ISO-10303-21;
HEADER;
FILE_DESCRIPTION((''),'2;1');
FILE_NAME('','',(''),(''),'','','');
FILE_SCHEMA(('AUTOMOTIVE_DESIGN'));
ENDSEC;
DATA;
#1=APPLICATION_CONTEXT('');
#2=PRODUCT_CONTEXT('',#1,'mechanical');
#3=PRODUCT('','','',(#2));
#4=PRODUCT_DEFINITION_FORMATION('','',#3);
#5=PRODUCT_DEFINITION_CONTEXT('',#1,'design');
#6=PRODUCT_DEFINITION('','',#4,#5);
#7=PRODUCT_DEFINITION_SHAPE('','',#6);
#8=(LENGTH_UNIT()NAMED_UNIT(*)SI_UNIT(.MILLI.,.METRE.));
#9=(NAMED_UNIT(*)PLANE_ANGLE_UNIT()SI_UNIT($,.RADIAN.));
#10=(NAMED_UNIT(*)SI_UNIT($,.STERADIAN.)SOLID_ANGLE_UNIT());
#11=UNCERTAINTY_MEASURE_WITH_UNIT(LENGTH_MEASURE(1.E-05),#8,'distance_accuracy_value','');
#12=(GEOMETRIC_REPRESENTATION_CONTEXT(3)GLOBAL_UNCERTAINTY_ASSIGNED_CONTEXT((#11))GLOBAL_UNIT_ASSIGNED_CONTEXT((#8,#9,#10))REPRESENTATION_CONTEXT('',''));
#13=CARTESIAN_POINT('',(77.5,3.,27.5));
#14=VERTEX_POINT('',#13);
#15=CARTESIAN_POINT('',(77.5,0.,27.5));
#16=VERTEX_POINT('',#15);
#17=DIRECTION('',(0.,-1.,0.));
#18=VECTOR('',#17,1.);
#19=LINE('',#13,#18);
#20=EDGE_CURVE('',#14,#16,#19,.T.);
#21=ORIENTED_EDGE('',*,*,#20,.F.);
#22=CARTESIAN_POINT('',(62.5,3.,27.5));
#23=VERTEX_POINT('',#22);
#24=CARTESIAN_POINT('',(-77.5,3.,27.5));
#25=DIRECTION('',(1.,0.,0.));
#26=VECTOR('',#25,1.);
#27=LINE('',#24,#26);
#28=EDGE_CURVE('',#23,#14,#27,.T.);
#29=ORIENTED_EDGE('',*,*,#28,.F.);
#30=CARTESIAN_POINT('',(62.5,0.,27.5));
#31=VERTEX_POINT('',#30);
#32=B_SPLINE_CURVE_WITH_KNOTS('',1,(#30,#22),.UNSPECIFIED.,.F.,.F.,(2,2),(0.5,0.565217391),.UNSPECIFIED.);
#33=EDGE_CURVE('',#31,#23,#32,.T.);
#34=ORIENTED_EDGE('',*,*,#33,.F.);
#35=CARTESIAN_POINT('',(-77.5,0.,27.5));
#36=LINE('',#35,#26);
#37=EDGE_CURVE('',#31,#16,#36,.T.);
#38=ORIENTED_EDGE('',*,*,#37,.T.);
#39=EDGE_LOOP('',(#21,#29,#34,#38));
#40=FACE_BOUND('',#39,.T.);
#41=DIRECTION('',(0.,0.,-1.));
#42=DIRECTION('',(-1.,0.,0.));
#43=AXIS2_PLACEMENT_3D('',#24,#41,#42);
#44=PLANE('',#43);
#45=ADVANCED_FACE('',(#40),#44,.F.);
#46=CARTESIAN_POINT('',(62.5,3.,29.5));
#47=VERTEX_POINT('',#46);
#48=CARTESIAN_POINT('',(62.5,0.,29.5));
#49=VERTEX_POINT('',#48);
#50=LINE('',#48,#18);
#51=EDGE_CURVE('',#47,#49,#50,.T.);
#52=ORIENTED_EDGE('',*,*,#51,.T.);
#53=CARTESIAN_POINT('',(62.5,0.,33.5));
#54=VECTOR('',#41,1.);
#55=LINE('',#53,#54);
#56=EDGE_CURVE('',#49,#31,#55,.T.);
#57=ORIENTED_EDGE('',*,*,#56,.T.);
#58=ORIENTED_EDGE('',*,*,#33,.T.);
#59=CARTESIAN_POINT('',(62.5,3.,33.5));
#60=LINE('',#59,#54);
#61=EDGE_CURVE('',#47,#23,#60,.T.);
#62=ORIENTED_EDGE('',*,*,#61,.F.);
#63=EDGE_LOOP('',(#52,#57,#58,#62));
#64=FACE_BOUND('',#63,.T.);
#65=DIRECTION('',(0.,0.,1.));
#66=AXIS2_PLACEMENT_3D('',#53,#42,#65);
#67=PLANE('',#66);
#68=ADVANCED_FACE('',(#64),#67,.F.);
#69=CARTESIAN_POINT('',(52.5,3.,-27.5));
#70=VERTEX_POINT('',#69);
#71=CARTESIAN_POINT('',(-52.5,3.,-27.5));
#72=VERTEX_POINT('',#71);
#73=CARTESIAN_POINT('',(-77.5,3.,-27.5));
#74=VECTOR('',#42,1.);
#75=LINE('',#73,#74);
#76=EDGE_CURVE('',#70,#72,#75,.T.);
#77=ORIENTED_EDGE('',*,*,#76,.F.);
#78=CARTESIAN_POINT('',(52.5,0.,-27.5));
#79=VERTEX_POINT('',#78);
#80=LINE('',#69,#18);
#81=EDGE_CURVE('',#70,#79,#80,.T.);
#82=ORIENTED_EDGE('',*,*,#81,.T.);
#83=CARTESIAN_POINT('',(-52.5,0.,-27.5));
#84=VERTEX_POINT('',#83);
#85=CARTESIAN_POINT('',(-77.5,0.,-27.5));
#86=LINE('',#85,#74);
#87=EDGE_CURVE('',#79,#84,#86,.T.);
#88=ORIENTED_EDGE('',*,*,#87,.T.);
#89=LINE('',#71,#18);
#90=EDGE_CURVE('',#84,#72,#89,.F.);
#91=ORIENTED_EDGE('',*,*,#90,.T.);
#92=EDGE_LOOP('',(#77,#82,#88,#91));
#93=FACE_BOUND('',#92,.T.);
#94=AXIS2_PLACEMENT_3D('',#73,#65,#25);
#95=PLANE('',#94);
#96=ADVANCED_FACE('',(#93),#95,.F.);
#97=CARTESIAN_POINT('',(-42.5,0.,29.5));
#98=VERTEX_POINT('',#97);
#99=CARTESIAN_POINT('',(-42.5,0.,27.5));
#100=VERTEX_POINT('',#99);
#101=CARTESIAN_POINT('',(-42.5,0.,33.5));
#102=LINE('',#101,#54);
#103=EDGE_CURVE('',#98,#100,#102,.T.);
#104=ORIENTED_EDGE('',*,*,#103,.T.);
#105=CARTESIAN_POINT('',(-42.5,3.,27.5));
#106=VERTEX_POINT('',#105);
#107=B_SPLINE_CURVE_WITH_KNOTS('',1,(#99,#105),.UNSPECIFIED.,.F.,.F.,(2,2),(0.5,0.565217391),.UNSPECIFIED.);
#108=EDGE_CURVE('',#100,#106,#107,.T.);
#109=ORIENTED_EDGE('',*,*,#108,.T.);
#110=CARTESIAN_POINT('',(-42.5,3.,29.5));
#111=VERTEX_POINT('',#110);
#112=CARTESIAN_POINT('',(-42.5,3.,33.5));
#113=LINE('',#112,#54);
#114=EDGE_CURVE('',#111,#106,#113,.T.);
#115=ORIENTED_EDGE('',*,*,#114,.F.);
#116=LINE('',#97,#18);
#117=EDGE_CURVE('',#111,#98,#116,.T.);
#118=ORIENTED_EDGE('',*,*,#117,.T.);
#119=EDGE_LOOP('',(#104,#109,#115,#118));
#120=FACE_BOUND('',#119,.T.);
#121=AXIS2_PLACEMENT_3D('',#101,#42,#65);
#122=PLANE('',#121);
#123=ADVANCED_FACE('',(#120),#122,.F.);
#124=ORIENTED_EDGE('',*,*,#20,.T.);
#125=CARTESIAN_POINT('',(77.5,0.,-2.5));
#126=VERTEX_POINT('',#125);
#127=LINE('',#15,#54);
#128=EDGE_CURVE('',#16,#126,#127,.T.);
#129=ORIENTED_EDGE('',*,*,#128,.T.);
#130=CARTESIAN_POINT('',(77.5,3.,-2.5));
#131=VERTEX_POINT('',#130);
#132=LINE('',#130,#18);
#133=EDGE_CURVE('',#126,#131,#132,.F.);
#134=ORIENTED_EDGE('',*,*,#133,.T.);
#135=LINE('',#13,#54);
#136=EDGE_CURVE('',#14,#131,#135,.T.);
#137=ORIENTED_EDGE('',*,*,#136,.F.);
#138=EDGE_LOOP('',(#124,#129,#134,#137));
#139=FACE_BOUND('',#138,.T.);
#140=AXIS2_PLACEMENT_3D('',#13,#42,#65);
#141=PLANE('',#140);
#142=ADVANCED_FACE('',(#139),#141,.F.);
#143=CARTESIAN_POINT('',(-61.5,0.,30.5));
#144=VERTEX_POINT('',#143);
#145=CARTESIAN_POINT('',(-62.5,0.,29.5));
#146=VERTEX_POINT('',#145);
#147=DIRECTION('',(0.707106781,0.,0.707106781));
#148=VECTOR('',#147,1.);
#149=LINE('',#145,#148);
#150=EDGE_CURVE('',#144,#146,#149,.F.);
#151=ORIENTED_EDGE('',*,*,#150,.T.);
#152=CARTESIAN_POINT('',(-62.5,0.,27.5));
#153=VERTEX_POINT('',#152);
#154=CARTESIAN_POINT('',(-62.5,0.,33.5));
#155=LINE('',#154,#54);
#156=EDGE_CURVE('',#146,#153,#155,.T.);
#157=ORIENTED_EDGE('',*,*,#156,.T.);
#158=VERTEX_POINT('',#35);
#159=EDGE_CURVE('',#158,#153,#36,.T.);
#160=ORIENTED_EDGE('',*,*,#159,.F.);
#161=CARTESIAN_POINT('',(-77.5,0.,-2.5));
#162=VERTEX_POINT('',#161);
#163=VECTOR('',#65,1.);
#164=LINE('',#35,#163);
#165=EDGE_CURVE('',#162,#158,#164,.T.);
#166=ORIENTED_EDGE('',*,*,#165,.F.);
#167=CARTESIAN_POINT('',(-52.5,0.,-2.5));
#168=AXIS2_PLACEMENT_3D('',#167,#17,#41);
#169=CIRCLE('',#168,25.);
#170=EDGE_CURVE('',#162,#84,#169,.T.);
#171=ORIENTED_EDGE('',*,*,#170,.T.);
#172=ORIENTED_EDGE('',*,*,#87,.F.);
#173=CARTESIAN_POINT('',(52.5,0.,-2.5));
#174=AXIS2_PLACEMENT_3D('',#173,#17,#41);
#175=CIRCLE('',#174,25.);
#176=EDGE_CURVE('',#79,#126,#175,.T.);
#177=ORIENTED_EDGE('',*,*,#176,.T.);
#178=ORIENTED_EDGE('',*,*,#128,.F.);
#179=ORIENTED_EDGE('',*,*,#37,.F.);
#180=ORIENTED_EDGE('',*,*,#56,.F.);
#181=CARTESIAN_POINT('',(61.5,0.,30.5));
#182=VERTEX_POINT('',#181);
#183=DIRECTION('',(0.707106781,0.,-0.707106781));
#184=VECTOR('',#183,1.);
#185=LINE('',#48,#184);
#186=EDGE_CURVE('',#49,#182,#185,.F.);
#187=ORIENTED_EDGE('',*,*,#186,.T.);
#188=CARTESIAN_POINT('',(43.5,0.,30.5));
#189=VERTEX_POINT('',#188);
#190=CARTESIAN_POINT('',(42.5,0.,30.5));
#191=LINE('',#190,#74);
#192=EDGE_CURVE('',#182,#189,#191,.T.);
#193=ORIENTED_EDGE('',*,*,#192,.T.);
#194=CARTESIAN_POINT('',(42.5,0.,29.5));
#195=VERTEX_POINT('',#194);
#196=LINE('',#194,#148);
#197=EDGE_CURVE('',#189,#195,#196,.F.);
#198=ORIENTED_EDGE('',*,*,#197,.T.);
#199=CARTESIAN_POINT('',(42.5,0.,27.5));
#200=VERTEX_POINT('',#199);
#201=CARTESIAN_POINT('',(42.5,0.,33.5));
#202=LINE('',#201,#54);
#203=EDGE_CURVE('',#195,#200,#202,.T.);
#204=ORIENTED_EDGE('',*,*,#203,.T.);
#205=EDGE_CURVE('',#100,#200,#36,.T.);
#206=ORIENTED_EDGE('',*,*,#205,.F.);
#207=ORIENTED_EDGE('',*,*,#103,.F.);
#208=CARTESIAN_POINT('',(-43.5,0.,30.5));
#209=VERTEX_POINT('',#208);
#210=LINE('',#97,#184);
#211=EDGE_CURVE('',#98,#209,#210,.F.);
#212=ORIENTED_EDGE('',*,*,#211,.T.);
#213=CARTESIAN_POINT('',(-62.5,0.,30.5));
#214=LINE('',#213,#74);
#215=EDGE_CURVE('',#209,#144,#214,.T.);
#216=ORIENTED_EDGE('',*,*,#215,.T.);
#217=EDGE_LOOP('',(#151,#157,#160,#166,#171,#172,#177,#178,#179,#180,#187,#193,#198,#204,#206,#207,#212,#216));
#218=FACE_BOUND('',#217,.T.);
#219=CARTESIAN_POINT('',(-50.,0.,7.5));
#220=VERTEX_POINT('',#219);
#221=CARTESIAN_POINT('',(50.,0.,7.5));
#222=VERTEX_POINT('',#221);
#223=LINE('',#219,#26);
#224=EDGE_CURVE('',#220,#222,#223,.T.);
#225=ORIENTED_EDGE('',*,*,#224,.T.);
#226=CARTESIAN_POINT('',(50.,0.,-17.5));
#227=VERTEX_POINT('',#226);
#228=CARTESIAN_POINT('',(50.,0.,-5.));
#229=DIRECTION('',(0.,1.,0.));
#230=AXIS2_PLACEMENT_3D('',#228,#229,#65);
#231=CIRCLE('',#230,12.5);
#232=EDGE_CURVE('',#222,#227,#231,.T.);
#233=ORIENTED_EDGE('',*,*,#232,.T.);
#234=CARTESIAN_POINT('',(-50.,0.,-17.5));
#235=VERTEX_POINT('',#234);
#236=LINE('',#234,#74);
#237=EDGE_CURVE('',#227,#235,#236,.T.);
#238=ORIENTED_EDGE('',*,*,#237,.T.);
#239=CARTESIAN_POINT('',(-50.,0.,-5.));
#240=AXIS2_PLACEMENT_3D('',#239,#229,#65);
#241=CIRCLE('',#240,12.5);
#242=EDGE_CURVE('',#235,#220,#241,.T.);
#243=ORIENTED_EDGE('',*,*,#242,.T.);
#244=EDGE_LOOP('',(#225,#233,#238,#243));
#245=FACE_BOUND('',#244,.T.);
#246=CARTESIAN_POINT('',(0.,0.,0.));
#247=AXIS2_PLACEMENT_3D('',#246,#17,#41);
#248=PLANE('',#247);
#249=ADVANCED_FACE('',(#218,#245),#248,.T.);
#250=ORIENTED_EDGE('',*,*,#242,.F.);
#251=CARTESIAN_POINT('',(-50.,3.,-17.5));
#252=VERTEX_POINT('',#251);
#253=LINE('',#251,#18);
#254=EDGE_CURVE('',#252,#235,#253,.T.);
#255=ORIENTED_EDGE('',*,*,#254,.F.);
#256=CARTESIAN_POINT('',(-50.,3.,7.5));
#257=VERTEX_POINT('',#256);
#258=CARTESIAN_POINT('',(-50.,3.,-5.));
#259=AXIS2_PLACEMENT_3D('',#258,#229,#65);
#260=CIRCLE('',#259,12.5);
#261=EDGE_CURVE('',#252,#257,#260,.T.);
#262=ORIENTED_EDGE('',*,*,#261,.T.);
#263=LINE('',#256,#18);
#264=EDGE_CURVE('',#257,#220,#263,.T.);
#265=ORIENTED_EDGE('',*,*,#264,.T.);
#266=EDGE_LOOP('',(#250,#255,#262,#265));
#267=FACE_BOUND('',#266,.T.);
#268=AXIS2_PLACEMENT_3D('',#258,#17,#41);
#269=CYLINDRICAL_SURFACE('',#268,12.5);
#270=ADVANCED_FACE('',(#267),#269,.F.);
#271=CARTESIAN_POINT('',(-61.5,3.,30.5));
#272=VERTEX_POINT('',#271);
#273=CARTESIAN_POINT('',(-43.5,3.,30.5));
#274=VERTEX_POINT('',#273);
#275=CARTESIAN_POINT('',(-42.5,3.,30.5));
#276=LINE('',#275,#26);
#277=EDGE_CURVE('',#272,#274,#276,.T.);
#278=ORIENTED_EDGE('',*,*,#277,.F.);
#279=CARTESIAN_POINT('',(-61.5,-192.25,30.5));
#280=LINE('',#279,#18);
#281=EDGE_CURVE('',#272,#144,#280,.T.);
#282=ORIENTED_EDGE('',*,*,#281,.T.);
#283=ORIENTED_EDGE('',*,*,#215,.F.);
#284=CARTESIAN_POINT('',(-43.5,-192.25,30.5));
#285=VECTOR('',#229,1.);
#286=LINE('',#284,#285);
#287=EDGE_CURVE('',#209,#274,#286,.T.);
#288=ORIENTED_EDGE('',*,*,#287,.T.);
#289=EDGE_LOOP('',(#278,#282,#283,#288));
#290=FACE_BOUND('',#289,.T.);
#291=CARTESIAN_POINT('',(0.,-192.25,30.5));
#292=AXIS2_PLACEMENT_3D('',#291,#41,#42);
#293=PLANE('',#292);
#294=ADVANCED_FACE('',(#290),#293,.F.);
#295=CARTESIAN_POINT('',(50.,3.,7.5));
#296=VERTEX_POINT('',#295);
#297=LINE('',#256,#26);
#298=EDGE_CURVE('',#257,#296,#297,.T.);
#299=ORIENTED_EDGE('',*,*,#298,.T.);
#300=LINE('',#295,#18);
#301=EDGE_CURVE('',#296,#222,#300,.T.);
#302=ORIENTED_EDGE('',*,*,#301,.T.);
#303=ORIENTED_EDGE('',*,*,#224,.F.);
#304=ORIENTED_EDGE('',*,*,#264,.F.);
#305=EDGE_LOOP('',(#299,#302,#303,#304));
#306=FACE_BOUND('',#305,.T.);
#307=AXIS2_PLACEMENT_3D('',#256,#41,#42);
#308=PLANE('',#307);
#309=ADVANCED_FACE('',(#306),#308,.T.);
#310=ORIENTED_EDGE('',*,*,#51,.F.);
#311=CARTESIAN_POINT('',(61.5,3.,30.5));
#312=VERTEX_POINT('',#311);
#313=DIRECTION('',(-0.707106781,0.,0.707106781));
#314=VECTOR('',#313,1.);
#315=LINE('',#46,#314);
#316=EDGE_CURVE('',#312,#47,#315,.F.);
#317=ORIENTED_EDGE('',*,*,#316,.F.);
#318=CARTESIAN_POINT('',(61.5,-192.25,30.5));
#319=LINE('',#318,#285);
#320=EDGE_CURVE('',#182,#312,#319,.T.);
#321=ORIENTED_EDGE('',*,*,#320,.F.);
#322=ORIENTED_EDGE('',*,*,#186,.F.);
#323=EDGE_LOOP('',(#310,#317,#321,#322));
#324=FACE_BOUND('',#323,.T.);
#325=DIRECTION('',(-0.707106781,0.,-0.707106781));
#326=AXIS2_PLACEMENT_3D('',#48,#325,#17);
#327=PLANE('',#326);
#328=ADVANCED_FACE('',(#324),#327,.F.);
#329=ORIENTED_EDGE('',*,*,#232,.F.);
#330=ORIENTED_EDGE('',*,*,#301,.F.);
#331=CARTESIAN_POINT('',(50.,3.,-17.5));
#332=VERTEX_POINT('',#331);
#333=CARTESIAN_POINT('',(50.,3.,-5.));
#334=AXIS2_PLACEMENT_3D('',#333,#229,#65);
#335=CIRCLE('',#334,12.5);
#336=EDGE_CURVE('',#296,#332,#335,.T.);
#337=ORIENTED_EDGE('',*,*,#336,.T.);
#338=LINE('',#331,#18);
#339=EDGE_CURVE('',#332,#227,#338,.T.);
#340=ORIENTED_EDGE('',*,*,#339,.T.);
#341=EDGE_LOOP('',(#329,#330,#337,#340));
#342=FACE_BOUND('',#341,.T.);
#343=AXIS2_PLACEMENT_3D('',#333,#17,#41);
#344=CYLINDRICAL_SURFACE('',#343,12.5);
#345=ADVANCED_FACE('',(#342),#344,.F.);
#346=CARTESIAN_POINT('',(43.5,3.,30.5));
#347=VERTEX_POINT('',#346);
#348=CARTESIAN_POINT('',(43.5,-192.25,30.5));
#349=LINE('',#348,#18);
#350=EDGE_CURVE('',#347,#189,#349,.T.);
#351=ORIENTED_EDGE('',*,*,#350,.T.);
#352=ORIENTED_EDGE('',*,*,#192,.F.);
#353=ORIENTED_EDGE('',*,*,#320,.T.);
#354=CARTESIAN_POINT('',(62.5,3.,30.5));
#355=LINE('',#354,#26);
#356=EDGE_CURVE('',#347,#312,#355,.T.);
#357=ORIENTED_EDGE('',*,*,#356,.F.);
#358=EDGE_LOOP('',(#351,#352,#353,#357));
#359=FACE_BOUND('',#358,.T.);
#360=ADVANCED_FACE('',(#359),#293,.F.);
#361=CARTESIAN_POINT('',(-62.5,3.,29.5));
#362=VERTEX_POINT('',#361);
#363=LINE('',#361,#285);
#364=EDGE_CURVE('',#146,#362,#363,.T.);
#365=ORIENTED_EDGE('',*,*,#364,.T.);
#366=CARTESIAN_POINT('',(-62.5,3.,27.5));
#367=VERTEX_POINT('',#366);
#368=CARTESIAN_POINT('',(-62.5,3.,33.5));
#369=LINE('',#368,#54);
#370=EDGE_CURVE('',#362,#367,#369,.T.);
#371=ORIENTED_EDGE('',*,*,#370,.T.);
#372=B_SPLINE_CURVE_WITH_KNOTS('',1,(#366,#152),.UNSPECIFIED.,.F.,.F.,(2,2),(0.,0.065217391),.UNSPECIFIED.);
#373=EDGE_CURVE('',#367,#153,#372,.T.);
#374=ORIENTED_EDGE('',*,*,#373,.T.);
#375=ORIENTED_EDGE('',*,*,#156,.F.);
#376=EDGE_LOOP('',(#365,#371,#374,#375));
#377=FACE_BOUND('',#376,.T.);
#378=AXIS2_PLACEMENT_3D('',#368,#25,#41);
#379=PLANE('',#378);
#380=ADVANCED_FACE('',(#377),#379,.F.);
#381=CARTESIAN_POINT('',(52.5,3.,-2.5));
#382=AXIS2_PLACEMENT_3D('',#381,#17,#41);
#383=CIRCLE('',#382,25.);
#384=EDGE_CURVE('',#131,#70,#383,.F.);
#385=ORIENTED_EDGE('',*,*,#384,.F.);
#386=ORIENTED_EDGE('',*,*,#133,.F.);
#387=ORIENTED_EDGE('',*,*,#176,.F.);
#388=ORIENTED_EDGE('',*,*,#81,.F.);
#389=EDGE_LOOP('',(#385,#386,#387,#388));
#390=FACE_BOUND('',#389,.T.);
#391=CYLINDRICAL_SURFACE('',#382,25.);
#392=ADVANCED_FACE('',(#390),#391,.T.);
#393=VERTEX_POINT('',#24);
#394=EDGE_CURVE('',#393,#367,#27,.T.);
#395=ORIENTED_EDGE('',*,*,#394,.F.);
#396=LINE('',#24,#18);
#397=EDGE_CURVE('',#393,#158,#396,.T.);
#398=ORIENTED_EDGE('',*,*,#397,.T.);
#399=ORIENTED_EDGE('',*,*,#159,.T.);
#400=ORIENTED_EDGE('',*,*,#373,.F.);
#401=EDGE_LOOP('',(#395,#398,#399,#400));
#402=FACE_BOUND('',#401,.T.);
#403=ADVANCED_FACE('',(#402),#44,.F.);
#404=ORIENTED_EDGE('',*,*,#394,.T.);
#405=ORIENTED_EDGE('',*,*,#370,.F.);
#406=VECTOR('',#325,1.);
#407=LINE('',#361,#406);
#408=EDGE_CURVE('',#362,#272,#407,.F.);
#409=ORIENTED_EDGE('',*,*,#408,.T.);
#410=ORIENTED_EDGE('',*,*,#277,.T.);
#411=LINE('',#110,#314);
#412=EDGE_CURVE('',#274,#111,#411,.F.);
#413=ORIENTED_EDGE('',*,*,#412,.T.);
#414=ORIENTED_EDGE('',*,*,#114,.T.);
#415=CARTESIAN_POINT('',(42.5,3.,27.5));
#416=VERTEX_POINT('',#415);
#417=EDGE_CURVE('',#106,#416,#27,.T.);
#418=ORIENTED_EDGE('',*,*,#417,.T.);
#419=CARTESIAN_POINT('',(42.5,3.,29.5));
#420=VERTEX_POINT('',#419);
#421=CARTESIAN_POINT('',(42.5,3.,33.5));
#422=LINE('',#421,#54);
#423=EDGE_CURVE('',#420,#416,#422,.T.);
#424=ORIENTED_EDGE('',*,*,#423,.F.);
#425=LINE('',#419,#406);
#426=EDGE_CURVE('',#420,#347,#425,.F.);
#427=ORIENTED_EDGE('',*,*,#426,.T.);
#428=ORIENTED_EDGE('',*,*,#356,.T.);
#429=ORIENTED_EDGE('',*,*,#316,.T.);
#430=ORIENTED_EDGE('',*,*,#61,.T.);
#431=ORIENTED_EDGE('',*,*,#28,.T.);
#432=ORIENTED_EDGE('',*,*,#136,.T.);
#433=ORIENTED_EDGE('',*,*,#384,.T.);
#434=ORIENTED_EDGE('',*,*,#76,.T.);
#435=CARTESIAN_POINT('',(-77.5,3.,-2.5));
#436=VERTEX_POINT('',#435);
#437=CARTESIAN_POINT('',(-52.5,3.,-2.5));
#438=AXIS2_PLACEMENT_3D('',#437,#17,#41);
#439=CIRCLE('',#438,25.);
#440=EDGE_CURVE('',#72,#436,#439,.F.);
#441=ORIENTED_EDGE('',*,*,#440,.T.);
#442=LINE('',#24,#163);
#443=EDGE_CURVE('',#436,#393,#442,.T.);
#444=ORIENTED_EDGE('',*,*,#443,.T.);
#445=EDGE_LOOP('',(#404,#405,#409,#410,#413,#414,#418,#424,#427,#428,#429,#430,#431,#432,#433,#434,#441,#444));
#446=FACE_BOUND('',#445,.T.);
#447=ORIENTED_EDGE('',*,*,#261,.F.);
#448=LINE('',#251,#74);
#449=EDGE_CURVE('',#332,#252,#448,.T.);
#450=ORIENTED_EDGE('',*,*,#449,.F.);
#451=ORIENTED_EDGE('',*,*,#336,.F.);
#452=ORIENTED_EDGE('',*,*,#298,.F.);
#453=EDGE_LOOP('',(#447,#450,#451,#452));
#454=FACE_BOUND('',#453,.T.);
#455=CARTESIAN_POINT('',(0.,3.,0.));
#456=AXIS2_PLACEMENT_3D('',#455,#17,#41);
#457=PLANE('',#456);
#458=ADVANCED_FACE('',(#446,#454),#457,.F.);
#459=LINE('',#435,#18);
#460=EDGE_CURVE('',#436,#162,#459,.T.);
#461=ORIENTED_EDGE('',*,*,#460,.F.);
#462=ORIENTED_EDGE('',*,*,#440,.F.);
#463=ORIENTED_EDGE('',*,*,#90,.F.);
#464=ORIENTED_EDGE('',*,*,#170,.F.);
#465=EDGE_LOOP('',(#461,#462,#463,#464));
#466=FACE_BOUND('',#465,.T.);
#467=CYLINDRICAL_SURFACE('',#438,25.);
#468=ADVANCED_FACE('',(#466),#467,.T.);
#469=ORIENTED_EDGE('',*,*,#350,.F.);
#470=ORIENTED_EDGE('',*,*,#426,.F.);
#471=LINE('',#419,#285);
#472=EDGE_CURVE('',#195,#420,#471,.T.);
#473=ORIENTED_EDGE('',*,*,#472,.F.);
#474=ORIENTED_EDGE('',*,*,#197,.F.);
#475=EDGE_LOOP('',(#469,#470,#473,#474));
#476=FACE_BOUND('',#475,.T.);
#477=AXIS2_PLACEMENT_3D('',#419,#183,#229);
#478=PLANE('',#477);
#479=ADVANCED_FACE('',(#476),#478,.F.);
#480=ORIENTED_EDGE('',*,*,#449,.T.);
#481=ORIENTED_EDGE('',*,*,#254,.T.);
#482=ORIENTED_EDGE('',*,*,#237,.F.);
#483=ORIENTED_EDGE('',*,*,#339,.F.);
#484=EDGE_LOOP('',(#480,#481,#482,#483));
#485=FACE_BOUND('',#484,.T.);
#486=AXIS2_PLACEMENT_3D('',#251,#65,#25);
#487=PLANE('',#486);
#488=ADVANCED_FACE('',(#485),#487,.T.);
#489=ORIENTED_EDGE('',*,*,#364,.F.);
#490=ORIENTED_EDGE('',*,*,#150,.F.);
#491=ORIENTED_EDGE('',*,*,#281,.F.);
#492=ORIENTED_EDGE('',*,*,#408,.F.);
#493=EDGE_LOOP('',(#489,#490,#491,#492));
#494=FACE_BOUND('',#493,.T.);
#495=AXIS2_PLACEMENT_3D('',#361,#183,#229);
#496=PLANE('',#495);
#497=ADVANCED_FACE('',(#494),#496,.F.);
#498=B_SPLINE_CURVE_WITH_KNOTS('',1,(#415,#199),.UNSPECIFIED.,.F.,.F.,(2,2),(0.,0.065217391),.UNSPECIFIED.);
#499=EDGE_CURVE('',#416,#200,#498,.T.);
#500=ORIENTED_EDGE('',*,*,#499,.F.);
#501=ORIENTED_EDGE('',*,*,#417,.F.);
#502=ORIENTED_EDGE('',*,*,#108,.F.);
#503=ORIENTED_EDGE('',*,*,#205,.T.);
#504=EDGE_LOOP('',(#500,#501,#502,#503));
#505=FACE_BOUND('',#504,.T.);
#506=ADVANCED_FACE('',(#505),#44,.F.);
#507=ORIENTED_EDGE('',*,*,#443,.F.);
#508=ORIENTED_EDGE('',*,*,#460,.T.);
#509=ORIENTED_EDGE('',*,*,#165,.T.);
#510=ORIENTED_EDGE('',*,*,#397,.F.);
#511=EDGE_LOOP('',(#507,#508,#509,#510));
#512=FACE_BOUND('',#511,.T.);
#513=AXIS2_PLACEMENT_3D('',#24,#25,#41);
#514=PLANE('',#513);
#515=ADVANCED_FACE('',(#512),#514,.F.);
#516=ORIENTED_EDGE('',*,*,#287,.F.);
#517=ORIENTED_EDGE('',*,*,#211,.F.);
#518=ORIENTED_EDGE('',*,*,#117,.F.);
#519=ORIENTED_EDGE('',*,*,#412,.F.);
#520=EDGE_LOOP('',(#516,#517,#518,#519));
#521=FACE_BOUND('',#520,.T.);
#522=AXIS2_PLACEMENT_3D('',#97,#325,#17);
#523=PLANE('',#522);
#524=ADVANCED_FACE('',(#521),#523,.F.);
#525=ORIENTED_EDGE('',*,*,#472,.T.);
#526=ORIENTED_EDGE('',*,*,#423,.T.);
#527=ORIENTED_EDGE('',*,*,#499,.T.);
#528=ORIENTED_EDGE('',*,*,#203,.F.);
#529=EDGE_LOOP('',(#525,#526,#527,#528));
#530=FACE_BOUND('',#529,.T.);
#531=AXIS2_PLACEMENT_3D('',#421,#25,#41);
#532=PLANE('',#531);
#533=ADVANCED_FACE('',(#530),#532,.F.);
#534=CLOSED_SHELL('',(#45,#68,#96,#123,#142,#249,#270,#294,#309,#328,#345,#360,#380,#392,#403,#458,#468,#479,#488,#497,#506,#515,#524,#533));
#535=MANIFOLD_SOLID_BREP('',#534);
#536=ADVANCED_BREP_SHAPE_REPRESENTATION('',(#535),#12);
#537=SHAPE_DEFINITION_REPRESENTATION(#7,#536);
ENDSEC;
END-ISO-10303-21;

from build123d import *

# Parameters (mm, degrees)
SKETCH1_W               = 155
SKETCH1_H               = 55
EXTRUDE1_DEPTH          = 3
FILLET1_R               = 25
TAB_AND_SLOT_TAB1_DEPTH = 3


# Read off the part's stored shape, not the designer's step: Tab and Slot-Tab1
with BuildPart() as part:
    # Sketch1 → Extrude1 (new body)
    with BuildSketch(Plane(origin=(0, 0, 0), x_dir=(1, 0, 0), z_dir=(0, 1, 0))):
        Rectangle(SKETCH1_W, SKETCH1_H)
        with BuildLine():
            Line((-50, 17.5), (50, 17.5))
            ThreePointArc((50, 17.5), (62.5, 5), (50, -7.5))
            Line((50, -7.5), (-50, -7.5))
            ThreePointArc((-50, -7.5), (-62.5, 5), (-50, 17.5))
        make_face(mode=Mode.SUBTRACT)
    extrude(amount=EXTRUDE1_DEPTH)

    # Fillet1
    fillet1_edges = [part.edges().sort_by_distance(p)[0] for p in [
        (-77.5, 1.5, -27.5),
        (77.5, 1.5, -27.5),
    ]]
    fillet(fillet1_edges, radius=FILLET1_R)

    # Tab and Slot-Tab1 outline → Tab and Slot-Tab1 (add)
    with BuildSketch(Plane(origin=(0, 0, 0), x_dir=(1, 0, 0), z_dir=(0, 1, 0))):
        Polygon((62.5, -27.5), (42.5, -27.5), (42.5, -29.5), (43.5, -30.5), (61.5, -30.5), (62.5, -29.5), align=None)
        Polygon((-42.5, -29.5), (-42.5, -27.5), (-62.5, -27.5), (-62.5, -29.5), (-61.5, -30.5), (-43.5, -30.5), align=None)
    extrude(amount=TAB_AND_SLOT_TAB1_DEPTH)


solid = part.part
